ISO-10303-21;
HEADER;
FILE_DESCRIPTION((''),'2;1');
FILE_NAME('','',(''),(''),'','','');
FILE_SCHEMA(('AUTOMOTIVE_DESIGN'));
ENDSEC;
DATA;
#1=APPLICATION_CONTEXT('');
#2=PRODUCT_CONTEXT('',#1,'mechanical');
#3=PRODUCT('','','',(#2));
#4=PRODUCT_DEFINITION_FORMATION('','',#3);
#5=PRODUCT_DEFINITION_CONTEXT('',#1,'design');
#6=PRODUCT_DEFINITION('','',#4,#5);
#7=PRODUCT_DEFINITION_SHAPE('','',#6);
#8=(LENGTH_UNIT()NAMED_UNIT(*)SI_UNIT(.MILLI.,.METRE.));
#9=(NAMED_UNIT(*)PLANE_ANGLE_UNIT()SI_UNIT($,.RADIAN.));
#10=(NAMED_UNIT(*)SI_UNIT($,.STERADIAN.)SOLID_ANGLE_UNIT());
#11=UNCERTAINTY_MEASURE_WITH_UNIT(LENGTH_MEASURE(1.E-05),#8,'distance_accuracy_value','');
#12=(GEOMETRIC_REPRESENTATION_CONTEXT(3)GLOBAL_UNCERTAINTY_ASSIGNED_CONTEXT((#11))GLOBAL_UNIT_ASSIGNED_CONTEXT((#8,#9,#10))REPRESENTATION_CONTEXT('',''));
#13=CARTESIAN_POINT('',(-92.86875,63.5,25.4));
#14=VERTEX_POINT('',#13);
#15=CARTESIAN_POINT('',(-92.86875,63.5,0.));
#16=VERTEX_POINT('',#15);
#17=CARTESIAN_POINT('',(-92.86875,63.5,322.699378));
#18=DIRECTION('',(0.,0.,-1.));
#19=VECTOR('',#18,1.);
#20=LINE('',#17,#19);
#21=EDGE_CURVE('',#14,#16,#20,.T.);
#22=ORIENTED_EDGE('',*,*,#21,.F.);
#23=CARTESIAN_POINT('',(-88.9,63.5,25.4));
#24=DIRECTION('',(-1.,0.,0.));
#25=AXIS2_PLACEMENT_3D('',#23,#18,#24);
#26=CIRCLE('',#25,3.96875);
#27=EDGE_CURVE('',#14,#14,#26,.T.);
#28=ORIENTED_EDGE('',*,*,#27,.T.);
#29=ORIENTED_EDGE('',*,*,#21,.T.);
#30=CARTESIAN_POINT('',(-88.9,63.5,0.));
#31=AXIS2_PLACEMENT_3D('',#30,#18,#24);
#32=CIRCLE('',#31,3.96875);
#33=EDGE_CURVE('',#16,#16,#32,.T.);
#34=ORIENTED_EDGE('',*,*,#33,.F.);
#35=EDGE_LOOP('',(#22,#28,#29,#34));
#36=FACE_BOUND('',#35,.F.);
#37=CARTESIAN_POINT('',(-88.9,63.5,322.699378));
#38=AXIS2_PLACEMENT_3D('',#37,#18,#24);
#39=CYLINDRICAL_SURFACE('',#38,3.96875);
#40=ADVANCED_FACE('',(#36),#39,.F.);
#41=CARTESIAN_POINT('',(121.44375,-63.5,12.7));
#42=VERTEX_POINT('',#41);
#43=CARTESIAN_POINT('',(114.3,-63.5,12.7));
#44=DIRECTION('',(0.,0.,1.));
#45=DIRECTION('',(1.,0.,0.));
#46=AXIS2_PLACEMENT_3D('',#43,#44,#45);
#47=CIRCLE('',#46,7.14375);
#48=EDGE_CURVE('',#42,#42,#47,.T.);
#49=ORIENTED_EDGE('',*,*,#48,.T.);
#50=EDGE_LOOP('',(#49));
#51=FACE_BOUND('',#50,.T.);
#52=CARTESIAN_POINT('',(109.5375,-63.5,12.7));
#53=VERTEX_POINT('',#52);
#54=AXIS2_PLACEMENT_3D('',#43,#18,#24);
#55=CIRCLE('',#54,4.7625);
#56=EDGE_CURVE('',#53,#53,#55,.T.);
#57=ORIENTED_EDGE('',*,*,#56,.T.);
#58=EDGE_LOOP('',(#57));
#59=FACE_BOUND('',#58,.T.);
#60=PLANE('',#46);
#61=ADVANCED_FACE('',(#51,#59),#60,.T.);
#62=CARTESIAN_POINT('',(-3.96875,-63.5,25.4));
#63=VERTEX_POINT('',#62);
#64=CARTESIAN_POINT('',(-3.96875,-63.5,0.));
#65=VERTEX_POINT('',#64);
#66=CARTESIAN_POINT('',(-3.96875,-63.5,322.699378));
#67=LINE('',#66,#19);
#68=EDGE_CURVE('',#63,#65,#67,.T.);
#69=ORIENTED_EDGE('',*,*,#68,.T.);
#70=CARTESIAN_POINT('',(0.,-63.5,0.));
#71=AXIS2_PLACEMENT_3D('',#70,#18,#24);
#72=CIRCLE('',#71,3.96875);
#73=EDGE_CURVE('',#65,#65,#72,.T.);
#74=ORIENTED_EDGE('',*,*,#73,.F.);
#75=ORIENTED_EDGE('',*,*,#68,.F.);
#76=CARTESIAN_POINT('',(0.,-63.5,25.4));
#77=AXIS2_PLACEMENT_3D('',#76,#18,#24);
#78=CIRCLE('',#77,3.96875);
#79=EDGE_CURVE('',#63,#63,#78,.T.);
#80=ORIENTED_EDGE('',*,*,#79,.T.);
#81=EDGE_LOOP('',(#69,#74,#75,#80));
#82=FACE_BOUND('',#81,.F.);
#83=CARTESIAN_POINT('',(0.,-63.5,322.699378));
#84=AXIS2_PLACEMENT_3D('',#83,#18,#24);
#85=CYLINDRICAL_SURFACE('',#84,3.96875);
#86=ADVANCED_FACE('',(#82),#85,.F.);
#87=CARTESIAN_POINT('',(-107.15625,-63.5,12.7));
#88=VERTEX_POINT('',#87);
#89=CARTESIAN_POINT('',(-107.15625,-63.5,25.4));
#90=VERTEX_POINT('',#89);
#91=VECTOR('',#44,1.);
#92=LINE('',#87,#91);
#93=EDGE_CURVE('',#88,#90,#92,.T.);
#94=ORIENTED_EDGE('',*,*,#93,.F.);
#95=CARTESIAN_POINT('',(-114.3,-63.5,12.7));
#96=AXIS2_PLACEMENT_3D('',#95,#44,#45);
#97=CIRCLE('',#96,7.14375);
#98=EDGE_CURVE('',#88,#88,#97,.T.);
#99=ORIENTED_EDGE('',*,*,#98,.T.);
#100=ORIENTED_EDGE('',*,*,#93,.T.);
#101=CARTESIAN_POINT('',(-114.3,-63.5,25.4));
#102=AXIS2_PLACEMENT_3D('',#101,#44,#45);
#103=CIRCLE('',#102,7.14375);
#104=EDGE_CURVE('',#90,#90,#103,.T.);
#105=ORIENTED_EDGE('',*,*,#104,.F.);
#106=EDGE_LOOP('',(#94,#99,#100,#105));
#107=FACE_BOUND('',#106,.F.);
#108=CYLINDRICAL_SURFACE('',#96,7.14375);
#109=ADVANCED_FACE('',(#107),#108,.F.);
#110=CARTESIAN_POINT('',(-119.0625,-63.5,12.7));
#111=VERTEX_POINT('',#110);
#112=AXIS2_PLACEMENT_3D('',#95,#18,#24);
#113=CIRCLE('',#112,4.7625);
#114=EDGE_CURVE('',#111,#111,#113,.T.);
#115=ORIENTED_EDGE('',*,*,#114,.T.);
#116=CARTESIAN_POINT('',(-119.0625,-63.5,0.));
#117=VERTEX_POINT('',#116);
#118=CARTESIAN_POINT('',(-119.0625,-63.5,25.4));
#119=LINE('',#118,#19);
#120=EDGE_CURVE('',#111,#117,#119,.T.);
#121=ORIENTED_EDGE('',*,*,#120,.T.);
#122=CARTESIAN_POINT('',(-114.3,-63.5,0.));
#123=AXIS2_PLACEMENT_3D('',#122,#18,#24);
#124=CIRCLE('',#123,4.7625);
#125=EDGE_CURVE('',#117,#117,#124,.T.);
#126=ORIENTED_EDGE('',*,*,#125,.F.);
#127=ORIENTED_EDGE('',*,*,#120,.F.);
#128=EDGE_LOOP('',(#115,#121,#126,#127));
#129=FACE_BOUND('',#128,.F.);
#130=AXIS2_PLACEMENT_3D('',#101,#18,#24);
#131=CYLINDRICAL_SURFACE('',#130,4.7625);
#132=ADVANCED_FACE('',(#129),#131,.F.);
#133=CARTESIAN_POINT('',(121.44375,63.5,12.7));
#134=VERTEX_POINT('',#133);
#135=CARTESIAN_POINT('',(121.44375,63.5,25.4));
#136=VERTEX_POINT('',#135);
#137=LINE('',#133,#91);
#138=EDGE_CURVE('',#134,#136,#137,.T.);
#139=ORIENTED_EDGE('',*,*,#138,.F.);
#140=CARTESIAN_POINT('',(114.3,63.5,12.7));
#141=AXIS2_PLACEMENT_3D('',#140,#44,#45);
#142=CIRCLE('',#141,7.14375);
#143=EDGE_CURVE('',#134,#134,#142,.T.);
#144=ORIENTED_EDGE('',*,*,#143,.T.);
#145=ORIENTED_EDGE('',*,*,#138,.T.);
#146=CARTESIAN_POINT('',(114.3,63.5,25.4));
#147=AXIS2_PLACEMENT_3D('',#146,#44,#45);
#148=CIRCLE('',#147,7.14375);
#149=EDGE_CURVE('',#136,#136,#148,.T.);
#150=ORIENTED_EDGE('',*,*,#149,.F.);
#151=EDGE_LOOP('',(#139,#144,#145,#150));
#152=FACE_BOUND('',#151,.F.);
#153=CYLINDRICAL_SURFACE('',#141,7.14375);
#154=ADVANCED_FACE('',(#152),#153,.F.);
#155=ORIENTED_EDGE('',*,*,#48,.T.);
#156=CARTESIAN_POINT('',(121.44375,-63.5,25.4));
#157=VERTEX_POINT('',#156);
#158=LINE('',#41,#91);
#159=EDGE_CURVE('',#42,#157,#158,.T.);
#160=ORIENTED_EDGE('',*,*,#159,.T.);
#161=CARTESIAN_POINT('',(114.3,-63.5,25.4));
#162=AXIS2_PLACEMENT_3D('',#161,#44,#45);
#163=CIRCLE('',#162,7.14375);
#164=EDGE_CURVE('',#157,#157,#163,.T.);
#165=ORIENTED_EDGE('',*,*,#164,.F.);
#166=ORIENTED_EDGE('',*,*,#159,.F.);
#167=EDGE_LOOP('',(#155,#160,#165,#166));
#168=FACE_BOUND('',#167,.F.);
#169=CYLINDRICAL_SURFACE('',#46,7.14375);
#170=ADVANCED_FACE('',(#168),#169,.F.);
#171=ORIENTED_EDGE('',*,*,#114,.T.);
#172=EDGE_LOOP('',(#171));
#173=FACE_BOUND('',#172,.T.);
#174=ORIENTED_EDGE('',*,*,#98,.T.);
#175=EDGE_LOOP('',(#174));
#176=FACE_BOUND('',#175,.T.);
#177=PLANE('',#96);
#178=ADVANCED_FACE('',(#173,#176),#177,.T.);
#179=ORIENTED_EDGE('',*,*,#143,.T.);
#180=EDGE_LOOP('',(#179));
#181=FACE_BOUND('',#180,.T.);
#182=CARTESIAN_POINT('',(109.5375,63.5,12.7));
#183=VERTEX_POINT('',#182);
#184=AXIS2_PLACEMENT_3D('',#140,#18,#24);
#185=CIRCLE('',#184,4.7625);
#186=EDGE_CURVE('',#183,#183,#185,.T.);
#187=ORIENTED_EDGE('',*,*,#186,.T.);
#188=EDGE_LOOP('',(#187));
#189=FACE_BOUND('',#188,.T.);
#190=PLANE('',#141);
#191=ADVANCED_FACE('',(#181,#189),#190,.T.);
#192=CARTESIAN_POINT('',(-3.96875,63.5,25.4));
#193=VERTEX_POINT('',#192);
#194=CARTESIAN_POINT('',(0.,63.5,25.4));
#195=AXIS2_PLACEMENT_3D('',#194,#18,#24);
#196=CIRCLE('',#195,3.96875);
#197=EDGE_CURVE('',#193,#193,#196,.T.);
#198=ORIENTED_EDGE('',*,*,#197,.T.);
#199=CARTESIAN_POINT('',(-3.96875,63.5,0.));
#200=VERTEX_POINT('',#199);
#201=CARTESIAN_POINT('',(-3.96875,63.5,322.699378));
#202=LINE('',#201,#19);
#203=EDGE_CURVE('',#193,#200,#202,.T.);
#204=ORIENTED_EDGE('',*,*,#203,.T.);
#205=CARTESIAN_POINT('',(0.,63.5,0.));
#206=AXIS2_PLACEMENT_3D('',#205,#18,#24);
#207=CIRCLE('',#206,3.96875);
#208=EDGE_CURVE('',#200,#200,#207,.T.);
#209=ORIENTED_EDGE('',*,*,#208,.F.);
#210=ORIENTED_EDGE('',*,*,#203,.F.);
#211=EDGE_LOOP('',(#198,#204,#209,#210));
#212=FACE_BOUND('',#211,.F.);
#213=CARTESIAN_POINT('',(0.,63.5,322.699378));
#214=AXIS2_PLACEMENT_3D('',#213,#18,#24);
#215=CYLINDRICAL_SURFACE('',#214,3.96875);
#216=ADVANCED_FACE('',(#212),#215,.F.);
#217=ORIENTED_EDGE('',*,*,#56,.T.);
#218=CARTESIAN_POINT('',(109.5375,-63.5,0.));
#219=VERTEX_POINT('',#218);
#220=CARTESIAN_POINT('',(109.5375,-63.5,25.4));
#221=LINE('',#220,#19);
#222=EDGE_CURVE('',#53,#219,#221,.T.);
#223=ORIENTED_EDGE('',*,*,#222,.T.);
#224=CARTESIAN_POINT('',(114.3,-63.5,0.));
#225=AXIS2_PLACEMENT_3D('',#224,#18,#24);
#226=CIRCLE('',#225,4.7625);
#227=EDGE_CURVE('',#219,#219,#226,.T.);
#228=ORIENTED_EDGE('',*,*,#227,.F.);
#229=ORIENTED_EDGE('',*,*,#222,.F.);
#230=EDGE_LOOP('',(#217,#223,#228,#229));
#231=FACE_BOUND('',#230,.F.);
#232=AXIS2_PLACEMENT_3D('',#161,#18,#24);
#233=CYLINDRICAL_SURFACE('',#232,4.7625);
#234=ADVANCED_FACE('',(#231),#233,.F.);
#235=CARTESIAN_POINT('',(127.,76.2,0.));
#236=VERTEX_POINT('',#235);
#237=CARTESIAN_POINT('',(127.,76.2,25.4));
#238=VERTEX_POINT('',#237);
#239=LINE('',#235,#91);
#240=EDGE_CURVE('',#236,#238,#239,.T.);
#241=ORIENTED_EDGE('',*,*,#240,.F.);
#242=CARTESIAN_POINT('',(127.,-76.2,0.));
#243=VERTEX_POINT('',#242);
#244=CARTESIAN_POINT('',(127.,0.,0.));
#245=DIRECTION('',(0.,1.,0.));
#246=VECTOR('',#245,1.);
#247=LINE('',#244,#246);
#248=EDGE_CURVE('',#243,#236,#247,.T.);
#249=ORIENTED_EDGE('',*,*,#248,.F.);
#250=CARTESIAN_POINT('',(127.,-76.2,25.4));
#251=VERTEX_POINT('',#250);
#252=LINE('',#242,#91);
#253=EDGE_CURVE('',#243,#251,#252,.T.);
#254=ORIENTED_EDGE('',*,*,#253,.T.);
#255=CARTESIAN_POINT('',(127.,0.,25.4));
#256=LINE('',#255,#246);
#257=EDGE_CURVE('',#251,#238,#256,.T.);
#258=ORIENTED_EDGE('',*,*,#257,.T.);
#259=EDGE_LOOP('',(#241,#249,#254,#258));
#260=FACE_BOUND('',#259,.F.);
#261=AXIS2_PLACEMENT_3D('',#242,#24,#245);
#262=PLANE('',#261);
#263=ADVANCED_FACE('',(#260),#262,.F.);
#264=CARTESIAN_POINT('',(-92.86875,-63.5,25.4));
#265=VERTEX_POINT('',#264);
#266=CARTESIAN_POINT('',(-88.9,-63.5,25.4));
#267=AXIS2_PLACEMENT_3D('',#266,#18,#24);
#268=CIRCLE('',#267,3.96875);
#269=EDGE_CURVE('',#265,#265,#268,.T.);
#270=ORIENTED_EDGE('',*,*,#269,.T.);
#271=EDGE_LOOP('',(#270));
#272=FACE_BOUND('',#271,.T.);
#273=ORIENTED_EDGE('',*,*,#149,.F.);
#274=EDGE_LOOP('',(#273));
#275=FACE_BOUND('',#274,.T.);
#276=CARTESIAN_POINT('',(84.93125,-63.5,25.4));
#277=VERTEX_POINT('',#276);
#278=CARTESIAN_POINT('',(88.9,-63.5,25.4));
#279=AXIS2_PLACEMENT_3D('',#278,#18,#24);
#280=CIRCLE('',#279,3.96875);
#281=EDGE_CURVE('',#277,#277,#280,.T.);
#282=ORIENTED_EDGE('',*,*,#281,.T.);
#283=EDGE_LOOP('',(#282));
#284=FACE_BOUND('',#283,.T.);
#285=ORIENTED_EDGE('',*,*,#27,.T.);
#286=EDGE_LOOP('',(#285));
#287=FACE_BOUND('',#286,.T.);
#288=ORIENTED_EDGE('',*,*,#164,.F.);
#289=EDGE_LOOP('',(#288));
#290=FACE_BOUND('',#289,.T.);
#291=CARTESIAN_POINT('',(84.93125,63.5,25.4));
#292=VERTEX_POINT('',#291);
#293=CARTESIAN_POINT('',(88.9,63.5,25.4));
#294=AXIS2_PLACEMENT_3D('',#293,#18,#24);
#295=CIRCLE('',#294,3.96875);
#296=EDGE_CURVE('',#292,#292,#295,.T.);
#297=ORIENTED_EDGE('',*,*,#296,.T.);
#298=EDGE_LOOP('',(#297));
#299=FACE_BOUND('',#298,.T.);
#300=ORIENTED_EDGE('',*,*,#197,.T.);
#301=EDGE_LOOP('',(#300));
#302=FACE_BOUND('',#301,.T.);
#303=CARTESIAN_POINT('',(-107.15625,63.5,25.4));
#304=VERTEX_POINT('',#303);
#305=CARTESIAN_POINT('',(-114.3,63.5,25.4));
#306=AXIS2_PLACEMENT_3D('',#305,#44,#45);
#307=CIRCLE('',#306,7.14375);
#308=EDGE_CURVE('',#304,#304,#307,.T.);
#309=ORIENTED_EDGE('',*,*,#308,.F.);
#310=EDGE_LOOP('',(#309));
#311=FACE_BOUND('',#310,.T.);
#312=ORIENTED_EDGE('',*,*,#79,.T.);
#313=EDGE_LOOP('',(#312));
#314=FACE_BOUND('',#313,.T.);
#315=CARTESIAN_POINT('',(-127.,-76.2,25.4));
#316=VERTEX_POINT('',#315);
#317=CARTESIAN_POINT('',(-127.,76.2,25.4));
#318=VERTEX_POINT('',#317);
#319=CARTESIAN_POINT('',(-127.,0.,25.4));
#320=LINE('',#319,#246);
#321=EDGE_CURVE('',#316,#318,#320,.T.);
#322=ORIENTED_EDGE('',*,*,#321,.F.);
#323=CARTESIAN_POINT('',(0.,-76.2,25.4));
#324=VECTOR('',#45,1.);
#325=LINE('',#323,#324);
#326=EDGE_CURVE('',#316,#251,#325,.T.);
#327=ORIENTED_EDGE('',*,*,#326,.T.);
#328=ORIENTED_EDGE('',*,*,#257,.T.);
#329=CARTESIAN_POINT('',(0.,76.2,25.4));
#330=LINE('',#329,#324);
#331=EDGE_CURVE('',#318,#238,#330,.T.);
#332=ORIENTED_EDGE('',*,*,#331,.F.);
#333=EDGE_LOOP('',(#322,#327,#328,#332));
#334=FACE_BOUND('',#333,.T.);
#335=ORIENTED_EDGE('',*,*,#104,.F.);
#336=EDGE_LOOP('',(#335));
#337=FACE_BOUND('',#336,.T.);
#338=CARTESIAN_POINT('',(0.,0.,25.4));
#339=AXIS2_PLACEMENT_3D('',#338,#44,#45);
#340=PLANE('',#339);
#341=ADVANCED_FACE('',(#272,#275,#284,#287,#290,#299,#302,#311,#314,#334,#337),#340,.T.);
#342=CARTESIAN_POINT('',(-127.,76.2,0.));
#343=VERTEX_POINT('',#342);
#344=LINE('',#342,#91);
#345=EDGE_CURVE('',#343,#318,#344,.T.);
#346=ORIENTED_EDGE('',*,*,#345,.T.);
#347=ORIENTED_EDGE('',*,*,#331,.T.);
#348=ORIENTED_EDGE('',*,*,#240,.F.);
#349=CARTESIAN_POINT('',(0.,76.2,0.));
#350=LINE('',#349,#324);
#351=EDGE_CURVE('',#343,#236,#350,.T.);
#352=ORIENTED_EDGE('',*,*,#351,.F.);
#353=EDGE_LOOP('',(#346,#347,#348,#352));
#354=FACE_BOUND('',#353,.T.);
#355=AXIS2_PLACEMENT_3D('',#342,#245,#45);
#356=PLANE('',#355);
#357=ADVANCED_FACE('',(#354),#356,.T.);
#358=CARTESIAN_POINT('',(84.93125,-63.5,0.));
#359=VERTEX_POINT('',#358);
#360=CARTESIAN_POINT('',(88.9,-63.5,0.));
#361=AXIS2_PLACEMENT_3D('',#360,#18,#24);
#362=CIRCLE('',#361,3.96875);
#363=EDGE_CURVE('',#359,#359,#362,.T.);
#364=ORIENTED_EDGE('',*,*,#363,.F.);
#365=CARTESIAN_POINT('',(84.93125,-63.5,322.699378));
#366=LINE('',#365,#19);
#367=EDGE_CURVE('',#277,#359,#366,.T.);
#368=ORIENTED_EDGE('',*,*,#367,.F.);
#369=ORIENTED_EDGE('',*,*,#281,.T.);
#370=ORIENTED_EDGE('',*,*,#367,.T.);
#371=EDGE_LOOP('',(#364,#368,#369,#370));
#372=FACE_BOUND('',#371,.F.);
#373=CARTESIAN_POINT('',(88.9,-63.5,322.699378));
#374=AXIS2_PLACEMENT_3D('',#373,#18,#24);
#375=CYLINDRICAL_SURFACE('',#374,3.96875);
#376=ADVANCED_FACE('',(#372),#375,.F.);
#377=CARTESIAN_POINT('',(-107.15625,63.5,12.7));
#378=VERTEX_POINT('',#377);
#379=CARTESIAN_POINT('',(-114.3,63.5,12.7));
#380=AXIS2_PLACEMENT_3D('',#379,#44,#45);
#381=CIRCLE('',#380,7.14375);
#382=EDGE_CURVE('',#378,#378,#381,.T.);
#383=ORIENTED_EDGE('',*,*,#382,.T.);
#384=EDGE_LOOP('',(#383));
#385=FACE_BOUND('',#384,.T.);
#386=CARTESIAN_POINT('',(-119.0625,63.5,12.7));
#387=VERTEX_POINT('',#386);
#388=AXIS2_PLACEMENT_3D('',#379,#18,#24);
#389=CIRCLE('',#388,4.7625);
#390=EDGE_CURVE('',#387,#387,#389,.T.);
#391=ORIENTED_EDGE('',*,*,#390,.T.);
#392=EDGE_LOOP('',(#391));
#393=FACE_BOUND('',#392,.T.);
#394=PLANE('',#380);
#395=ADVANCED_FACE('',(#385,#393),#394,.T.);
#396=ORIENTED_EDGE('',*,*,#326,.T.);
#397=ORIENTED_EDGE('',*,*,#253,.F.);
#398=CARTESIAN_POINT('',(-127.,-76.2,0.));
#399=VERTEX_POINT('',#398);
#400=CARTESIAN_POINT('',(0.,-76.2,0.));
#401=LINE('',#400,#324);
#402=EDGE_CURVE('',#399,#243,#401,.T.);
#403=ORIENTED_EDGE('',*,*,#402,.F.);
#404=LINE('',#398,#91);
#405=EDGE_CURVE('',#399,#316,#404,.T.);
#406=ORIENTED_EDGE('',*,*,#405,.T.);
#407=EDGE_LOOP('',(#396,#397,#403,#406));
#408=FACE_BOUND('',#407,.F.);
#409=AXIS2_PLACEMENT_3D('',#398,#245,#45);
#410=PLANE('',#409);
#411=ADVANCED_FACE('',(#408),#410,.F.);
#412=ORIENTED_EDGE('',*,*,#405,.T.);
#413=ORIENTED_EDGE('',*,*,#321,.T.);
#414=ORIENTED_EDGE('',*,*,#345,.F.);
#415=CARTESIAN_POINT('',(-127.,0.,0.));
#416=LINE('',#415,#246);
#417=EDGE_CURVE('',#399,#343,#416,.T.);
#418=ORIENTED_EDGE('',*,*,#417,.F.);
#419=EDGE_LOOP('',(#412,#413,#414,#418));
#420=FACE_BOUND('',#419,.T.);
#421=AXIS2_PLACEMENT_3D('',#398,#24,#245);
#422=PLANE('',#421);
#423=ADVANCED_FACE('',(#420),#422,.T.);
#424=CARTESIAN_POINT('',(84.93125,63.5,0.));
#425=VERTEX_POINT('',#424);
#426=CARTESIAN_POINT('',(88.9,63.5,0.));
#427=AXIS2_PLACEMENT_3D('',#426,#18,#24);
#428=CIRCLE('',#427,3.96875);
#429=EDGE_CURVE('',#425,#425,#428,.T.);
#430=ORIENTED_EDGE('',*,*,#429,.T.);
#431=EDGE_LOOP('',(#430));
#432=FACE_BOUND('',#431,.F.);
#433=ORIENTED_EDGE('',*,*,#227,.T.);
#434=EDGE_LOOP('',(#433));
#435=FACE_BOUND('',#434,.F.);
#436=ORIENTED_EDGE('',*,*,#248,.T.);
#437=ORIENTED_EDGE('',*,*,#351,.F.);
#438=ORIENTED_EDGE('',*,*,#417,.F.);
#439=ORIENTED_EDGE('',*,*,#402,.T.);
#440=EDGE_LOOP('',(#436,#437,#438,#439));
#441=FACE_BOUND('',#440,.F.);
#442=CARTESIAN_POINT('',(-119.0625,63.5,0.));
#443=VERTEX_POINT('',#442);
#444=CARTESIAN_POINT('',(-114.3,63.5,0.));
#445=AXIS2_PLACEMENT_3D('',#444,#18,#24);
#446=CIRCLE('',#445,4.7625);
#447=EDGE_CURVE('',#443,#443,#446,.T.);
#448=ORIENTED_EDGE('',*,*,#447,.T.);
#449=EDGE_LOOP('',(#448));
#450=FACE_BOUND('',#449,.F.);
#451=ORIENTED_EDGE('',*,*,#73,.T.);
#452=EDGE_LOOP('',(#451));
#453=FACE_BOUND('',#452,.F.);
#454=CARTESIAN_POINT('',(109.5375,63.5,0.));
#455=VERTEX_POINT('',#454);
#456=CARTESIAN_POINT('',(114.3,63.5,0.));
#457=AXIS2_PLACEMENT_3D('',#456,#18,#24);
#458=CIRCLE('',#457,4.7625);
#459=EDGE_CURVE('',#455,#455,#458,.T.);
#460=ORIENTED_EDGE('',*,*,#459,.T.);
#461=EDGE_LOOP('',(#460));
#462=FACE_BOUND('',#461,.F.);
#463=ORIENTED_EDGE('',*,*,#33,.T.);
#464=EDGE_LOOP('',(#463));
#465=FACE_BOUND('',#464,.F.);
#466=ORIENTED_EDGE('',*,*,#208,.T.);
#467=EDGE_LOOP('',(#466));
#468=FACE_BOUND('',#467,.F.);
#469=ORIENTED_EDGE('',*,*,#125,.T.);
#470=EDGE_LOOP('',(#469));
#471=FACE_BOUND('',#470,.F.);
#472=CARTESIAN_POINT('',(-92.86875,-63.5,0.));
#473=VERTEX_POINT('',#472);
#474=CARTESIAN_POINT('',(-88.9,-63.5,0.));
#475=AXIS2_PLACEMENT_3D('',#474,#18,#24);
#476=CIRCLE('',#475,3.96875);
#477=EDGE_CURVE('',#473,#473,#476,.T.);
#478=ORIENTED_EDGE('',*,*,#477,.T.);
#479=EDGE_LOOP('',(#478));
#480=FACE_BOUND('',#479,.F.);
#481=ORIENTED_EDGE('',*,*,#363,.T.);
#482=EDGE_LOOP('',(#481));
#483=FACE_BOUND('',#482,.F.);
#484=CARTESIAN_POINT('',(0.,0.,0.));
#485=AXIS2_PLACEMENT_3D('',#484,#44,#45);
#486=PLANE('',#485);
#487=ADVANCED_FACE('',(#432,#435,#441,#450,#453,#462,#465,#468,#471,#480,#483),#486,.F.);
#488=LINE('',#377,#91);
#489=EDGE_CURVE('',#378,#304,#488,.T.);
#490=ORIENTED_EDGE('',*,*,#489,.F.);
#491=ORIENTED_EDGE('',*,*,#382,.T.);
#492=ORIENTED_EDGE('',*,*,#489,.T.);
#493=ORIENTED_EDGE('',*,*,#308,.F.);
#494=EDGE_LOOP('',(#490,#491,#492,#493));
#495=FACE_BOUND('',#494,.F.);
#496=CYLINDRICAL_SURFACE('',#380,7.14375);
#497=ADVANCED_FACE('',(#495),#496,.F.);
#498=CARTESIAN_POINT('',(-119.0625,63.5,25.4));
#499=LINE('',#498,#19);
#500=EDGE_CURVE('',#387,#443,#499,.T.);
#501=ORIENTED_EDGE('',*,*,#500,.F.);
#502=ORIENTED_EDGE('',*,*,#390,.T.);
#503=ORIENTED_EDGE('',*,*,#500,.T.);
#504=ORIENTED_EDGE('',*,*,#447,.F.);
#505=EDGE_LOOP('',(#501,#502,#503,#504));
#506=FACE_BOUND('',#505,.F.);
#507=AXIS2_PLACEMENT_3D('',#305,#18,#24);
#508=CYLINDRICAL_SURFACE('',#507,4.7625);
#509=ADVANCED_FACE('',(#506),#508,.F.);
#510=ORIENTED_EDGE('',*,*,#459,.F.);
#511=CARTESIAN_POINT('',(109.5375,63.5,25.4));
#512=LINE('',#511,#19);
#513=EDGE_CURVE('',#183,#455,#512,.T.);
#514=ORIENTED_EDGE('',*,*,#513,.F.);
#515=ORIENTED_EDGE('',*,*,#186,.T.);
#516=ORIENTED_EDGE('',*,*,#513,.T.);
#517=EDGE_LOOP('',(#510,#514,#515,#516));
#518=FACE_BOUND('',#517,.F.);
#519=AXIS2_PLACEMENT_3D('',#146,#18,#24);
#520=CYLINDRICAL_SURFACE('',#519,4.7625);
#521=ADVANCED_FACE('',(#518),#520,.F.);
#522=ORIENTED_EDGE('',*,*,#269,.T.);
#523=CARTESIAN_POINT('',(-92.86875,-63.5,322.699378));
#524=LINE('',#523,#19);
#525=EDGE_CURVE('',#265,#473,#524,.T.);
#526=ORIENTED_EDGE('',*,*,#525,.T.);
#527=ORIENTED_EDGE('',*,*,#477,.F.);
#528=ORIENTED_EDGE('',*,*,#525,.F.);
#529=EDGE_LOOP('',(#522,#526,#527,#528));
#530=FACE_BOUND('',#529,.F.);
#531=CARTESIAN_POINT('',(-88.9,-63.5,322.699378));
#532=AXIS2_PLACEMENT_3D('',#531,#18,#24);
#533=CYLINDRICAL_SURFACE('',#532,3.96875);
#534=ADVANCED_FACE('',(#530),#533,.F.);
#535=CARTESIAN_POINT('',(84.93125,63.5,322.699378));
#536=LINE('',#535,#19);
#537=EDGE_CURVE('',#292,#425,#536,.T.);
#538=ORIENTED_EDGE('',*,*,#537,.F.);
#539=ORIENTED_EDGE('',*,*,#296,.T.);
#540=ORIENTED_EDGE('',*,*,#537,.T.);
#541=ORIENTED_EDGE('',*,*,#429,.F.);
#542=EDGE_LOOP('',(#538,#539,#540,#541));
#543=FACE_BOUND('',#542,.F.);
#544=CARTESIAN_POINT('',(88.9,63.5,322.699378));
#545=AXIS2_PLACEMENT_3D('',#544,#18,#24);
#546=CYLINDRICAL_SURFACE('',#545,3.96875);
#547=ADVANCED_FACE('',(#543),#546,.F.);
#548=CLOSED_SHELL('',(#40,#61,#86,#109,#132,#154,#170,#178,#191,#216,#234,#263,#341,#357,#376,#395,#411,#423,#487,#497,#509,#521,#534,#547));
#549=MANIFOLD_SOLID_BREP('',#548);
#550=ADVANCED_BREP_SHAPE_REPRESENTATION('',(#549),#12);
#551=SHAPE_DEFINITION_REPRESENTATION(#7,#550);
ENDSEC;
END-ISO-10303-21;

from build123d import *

# Parameters (mm, degrees)
F0_W           = 254
F0_H           = 152.4
F1_DEPTH       = 25.4
F3_D           = 9.525
F3_CBORE_D     = 14.2875
F3_CBORE_DEPTH = 12.7
F5_D           = 7.9375


# Not quite as in the source:
# - a length typed as a fraction of an inch, garbled in the dataset ("3 / 203.2 mm" for 3/8 in), is restored


with BuildPart() as f1:
    # F0 (on Top) → F1 (new body)
    with BuildSketch(Plane.XY):
        Rectangle(F0_W, F0_H)
    extrude(amount=F1_DEPTH)

    # F3 (through all)
    with Locations(Plane.XY.offset(25.4)):
        with Locations((-114.3, 63.5), (-114.3, -63.5), (114.3, 63.5), (114.3, -63.5)):
            CounterBoreHole(F3_D / 2, F3_CBORE_D / 2, F3_CBORE_DEPTH)

    # F5 (through all)
    with Locations(Plane.XY.offset(25.4)):
        with Locations((-88.9, 63.5), (0, 63.5), (88.9, 63.5), (88.9, -63.5), (0, -63.5), (-88.9, -63.5)):
            Hole(F5_D / 2)


solid = f1.part
